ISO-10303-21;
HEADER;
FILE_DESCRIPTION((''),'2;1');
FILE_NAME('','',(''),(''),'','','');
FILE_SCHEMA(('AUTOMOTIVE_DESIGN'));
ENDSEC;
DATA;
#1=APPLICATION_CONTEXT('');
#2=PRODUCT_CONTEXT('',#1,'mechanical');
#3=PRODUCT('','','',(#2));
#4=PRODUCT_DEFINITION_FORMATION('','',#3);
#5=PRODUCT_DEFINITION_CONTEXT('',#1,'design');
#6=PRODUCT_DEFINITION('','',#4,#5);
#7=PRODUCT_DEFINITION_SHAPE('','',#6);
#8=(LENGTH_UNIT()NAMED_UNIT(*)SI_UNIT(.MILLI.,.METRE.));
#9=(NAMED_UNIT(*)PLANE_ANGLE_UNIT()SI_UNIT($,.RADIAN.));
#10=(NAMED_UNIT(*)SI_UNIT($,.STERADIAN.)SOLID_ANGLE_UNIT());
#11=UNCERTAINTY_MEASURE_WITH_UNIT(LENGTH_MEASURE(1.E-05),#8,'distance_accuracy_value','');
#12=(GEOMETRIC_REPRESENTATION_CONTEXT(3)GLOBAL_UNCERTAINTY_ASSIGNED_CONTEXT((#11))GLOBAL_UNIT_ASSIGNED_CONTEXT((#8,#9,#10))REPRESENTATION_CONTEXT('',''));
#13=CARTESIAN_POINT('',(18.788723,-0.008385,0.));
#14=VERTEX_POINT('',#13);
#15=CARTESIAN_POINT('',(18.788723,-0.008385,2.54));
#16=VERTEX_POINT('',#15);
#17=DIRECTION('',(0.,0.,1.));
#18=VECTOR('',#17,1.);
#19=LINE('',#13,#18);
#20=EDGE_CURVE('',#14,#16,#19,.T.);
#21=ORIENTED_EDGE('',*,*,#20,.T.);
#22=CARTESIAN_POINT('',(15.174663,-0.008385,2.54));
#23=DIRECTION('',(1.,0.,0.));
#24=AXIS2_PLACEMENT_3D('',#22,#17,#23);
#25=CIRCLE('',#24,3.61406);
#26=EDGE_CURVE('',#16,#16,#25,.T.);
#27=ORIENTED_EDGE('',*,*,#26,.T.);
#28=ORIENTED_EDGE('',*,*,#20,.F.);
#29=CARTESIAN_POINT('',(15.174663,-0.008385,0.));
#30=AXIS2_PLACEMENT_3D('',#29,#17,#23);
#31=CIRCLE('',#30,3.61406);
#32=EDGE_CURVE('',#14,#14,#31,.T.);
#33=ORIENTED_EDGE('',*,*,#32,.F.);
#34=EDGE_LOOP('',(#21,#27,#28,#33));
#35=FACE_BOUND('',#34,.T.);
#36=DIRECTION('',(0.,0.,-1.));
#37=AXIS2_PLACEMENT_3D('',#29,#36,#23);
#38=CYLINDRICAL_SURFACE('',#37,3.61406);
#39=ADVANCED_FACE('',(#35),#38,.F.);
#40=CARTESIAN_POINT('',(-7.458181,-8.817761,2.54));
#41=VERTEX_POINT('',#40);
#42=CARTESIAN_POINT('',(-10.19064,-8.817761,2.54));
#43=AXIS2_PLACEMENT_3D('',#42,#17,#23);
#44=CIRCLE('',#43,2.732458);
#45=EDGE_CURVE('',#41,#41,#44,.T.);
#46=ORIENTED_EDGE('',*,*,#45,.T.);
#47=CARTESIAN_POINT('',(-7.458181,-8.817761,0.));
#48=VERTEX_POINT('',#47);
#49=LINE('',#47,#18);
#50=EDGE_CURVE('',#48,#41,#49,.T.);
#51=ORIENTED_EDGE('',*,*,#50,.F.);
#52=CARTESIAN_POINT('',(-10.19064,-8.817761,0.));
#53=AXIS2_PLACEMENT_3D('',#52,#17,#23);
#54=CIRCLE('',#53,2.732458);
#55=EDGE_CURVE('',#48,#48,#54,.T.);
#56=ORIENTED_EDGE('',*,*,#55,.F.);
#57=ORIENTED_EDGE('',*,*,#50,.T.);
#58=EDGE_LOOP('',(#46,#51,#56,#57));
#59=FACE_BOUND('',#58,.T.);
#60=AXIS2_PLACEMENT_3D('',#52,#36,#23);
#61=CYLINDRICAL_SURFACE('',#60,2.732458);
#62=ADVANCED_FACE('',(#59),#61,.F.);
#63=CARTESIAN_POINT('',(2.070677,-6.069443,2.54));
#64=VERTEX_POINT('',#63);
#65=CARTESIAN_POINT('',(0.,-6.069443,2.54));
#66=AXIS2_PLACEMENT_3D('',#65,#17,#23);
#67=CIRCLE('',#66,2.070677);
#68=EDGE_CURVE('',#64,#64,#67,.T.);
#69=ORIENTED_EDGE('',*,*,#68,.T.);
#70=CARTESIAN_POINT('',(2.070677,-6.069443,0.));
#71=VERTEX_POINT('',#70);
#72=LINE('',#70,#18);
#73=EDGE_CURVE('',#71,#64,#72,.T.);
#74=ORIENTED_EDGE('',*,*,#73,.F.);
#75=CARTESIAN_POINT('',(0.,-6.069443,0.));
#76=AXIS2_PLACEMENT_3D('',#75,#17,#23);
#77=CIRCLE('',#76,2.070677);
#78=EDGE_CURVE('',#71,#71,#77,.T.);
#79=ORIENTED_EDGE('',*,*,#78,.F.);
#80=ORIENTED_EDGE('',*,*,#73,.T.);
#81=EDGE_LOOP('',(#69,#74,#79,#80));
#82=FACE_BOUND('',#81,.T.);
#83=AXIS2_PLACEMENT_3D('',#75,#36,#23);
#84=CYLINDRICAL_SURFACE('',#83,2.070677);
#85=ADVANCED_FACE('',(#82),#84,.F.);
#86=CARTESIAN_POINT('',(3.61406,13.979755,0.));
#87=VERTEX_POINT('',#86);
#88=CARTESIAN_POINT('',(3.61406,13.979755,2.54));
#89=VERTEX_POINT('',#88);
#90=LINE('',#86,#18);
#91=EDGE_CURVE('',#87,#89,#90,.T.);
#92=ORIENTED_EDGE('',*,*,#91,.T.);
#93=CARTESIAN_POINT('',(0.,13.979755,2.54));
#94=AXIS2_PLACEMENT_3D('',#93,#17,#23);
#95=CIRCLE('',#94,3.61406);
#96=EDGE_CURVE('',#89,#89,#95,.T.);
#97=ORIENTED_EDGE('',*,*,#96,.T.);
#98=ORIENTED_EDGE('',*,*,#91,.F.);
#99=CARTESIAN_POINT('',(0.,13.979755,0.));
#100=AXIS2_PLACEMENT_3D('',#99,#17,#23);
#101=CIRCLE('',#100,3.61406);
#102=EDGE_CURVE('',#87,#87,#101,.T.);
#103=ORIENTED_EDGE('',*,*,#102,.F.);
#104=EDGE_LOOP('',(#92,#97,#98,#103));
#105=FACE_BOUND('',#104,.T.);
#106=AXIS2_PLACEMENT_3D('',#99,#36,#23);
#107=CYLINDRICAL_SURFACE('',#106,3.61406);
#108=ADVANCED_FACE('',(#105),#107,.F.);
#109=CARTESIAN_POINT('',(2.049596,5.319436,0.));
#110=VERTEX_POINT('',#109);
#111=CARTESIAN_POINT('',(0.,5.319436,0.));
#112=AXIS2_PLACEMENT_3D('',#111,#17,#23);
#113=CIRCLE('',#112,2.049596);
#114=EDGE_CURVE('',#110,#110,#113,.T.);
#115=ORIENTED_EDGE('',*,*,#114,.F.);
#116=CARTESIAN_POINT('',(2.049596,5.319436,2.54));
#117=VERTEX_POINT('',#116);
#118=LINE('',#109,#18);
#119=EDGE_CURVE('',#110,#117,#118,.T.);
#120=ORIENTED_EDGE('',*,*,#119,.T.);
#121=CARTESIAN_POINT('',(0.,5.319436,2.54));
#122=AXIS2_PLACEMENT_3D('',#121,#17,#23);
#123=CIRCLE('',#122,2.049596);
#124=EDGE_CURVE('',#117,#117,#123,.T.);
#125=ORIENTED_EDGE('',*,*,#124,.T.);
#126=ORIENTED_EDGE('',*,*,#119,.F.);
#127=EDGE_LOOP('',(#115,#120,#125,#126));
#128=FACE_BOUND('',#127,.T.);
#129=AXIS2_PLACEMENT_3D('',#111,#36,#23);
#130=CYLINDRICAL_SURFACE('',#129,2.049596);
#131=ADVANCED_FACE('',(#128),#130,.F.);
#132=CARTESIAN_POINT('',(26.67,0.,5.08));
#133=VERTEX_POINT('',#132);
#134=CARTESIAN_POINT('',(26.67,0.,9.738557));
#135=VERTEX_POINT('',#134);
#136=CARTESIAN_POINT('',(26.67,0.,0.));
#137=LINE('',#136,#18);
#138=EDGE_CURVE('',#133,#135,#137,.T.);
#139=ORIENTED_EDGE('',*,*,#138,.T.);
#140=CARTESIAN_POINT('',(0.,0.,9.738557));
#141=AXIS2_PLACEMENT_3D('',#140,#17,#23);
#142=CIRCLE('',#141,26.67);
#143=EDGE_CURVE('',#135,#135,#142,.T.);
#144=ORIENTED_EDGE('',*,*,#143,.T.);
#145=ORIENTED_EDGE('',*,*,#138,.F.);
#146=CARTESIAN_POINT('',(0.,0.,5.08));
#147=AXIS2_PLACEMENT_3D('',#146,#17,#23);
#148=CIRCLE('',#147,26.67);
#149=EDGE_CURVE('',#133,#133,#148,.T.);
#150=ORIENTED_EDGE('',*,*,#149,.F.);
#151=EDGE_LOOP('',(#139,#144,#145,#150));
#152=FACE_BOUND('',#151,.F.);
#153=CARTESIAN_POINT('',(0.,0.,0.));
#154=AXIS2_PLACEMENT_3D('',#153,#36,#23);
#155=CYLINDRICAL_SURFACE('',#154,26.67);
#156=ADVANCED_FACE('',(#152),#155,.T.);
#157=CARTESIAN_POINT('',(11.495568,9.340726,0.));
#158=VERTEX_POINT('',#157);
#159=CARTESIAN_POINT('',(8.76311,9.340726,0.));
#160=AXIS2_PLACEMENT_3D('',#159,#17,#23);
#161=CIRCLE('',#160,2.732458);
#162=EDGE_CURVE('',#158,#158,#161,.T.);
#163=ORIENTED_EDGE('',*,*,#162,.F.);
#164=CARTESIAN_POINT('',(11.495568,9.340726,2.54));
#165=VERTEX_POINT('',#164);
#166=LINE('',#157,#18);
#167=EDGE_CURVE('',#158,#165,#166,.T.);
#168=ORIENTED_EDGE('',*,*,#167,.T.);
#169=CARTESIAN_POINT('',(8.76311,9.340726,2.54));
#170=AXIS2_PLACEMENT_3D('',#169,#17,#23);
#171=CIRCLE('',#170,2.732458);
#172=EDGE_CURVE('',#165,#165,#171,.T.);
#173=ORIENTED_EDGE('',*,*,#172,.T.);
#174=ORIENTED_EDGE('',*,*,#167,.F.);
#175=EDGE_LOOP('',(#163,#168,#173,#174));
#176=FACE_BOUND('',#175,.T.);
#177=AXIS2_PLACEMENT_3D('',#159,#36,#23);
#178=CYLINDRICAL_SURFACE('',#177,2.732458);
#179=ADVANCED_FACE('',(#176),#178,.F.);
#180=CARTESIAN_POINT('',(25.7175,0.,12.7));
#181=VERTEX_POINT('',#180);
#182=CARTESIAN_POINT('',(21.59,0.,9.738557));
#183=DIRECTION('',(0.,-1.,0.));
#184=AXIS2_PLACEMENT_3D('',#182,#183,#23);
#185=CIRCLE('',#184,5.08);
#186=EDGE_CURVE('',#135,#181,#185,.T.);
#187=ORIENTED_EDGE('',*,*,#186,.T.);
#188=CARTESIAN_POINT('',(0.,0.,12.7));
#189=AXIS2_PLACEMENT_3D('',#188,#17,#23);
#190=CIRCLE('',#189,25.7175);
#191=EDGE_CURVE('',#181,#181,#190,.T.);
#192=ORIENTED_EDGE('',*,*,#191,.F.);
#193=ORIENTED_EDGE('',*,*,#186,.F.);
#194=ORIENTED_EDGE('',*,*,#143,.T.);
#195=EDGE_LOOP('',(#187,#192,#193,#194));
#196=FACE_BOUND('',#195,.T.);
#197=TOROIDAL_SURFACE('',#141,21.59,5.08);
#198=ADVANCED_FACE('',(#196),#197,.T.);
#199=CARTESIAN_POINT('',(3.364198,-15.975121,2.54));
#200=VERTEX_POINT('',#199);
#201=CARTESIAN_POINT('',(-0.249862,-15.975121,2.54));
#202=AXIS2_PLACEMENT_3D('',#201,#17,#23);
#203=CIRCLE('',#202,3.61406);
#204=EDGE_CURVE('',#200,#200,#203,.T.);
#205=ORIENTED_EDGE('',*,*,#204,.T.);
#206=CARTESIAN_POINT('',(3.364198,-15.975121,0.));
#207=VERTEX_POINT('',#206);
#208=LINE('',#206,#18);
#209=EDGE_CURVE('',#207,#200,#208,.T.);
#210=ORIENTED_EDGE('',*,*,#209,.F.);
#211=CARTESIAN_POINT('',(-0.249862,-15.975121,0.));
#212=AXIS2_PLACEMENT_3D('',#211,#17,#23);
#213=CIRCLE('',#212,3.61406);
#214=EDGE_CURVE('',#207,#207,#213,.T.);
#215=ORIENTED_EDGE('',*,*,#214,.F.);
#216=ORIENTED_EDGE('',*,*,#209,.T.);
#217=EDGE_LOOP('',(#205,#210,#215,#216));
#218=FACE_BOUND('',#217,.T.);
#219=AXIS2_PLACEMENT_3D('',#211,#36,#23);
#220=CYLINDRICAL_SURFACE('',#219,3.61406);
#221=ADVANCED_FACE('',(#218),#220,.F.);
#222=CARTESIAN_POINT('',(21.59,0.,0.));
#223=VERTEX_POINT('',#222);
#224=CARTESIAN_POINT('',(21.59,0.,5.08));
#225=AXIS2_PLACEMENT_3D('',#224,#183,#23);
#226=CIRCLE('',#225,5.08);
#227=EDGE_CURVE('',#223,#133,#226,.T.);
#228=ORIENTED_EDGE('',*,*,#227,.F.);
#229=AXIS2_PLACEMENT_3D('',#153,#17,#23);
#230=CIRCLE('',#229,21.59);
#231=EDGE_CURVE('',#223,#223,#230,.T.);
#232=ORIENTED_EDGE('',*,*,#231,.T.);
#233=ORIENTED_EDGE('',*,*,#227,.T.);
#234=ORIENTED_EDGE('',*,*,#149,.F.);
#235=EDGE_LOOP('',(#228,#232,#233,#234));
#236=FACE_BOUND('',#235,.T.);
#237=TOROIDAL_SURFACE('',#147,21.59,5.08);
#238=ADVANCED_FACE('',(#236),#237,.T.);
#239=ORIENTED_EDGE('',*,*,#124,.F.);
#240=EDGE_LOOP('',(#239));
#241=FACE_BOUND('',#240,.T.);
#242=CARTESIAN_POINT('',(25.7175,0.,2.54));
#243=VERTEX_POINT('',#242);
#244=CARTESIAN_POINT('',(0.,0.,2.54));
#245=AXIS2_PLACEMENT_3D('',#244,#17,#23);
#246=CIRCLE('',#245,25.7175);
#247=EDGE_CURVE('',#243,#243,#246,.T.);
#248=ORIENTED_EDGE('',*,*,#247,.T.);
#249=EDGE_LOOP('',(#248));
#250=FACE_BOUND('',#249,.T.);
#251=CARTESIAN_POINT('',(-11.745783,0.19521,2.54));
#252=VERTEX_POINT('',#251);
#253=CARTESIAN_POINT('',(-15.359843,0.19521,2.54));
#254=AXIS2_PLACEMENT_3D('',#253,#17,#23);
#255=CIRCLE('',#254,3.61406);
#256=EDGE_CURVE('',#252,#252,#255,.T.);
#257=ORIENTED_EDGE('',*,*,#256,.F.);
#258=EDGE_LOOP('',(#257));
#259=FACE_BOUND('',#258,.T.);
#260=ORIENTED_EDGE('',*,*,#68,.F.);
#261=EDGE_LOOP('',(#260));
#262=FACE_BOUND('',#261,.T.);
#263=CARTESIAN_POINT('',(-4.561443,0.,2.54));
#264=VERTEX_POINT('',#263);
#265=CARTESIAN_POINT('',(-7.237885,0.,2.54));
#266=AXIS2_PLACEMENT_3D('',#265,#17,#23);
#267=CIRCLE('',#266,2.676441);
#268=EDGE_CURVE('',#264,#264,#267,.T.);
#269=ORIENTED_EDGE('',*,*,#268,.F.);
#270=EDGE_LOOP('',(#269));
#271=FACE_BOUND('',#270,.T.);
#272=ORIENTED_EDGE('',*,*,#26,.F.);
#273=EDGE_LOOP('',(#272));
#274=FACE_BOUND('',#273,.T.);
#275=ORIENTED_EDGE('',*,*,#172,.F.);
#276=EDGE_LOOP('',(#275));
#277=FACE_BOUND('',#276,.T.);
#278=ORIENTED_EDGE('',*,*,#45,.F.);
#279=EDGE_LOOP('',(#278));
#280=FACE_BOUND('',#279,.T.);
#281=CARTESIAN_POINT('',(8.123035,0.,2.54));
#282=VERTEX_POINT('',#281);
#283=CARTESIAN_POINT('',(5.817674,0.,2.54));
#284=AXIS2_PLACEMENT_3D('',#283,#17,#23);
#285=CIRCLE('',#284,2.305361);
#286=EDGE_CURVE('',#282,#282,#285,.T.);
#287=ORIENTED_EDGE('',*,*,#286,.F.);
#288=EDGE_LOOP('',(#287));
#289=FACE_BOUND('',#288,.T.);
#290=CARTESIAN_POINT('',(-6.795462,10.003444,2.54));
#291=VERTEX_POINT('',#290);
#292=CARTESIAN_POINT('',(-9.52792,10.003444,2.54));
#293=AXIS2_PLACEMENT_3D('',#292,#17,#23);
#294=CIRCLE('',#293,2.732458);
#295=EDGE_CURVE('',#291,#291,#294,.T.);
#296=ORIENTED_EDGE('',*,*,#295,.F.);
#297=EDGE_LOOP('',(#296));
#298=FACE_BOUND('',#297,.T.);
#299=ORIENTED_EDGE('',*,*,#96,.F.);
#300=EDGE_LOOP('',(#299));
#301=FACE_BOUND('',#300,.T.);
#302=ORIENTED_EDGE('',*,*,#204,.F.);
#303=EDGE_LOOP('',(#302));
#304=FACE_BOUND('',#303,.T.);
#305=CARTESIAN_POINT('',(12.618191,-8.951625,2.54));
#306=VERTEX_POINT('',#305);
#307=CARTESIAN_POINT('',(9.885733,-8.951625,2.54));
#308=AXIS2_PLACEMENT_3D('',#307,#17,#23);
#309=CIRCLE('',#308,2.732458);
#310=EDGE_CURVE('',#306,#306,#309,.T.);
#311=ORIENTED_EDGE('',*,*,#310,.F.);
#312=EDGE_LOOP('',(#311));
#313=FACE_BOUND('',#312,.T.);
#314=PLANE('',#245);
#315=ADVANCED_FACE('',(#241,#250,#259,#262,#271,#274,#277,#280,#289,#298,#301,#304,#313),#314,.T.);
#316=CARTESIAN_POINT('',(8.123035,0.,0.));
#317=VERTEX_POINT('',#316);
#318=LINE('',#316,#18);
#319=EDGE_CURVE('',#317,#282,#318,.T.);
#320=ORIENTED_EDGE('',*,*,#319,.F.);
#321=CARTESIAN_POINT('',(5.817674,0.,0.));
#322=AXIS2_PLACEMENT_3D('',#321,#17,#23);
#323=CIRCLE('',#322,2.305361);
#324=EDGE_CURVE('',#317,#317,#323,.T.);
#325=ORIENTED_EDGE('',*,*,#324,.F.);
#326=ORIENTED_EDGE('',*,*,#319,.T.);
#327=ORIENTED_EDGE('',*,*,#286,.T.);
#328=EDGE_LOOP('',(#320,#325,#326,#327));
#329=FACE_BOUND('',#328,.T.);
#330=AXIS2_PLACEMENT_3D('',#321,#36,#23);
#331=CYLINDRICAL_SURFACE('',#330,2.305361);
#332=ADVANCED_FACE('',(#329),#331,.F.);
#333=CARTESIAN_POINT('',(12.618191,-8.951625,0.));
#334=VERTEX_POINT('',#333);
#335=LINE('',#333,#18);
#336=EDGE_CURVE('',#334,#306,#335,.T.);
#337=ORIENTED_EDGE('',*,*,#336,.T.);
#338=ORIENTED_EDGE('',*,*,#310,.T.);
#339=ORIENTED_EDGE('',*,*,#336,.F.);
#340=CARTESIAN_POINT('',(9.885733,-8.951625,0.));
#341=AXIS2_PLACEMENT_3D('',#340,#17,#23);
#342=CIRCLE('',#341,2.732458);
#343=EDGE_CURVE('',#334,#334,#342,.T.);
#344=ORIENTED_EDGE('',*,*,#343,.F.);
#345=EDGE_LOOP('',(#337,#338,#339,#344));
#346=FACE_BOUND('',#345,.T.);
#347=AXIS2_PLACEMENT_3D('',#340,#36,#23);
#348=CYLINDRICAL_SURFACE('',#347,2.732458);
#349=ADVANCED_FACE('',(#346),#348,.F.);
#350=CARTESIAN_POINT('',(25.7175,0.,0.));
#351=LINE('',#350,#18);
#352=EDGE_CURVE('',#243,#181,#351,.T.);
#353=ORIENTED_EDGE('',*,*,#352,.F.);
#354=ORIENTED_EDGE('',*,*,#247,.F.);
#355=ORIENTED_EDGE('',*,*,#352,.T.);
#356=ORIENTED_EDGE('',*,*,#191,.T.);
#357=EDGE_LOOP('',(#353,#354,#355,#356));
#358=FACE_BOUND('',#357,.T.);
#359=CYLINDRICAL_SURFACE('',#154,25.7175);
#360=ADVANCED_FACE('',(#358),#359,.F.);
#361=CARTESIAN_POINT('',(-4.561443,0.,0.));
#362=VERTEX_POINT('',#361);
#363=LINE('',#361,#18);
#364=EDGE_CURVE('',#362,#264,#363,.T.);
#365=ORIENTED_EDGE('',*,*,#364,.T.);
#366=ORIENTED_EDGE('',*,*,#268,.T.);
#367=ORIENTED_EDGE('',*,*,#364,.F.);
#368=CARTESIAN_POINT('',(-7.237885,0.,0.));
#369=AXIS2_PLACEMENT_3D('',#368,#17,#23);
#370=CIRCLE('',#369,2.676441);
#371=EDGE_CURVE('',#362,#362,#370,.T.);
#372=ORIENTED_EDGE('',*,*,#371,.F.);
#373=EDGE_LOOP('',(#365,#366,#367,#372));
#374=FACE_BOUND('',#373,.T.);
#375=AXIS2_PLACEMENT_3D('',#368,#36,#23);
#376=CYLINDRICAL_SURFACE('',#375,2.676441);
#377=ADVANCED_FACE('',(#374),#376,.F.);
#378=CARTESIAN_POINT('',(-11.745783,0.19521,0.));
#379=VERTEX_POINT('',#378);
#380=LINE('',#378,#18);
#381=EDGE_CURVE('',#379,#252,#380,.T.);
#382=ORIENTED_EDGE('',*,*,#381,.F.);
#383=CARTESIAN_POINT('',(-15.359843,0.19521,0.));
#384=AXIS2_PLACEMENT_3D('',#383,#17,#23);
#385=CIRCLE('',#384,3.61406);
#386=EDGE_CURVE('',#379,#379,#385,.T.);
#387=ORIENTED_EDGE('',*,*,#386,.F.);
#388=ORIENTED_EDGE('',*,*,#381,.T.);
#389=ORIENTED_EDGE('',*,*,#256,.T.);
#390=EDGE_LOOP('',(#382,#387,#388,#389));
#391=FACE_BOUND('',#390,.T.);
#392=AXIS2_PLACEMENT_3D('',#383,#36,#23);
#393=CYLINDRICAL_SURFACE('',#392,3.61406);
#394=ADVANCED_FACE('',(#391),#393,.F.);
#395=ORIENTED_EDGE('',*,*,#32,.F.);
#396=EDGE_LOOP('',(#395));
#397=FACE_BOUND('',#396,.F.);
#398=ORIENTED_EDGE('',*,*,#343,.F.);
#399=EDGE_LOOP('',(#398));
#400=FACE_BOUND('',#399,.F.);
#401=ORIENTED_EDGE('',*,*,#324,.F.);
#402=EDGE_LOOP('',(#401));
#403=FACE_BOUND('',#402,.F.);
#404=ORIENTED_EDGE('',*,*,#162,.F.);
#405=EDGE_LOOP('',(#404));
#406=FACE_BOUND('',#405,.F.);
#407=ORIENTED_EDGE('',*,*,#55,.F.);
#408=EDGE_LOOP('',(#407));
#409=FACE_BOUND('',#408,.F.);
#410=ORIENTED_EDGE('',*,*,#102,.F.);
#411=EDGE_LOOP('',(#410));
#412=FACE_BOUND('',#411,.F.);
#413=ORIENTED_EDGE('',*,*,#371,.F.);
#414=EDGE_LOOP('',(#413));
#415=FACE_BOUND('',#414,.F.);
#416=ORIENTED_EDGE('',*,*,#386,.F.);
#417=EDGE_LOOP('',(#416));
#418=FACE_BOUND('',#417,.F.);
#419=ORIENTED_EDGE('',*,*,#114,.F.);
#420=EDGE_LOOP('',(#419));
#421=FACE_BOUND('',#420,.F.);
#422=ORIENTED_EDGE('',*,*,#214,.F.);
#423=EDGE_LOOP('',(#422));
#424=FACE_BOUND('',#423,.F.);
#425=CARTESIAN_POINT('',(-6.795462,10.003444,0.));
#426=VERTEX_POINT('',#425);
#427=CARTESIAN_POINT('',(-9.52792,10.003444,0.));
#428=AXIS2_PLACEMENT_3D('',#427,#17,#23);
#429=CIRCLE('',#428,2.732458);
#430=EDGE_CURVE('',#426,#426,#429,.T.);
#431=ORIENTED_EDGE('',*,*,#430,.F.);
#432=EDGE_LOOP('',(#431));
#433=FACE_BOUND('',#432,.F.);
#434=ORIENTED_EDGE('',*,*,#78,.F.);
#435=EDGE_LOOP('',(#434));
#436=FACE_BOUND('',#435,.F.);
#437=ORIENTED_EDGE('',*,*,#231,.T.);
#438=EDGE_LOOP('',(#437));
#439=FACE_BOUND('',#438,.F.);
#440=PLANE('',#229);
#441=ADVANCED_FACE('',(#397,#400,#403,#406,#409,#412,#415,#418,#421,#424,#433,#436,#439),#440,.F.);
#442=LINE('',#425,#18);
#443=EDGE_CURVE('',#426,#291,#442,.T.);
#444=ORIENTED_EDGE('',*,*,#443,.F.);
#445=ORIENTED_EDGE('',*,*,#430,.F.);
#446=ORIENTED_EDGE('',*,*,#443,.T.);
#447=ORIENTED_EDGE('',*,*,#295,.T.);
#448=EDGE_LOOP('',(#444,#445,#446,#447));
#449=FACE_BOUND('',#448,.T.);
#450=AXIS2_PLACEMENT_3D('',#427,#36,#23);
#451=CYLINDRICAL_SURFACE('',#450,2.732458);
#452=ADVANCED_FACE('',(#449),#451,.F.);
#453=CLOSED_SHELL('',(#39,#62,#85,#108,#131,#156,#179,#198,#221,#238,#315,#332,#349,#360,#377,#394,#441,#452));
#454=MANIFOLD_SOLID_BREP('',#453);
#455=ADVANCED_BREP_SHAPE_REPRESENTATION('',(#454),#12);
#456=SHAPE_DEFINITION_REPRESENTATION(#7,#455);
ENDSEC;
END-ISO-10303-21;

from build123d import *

# Parameters (mm, degrees)
F0_R     = 26.67
F0_R_2   = 25.7175
F1_DEPTH = 12.7
F0_R_3   = 3.6140603124
F0_R_4   = 2.7324582159
F0_R_5   = 2.6764413385
F0_R_6   = 2.0706768846
F0_R_7   = 2.3053611978
F0_R_8   = 2.0495959377
F2_DEPTH = 2.54
F3_R     = 5.08


# Not quite as in the source:
# - a fillet or chamfer that OpenCascade refuses, or shapes differently, is made with other operations: its cross-section is extruded or revolved along the edge and cut away or added


with BuildPart() as f1:
    # F0 (on Top) → F1 (new body)
    with BuildSketch(Plane.XY):
        Circle(F0_R)
        Circle(F0_R_2, mode=Mode.SUBTRACT)
    extrude(amount=F1_DEPTH)

    # F0 (on Top) → F2 (join)
    with BuildSketch(Plane.XY):
        Circle(F0_R_2)
        with Locations((-0.2498619724, -15.9751214087)):
            Circle(F0_R_3, mode=Mode.SUBTRACT)
        with Locations((-10.1906396449, -8.8177612051)):
            Circle(F0_R_4, mode=Mode.SUBTRACT)
        with Locations((-7.2378846817, 0)):
            Circle(F0_R_5, mode=Mode.SUBTRACT)
        with Locations((0, -6.0694427229)):
            Circle(F0_R_6, mode=Mode.SUBTRACT)
        with Locations((9.885732587, -8.9516246493)):
            Circle(F0_R_4, mode=Mode.SUBTRACT)
        with Locations((5.8176736347, 0)):
            Circle(F0_R_7, mode=Mode.SUBTRACT)
        with Locations((15.1746629134, -0.0083851115)):
            Circle(F0_R_3, mode=Mode.SUBTRACT)
        with Locations((-15.3598431498, 0.1952101447)):
            Circle(F0_R_3, mode=Mode.SUBTRACT)
        with Locations((0, 5.3194356151)):
            Circle(F0_R_8, mode=Mode.SUBTRACT)
        with Locations((-9.527919814, 10.0034438074)):
            Circle(F0_R_4, mode=Mode.SUBTRACT)
        with Locations((0, 13.979755342)):
            Circle(F0_R_3, mode=Mode.SUBTRACT)
        with Locations((8.7631102651, 9.3407258391)):
            Circle(F0_R_4, mode=Mode.SUBTRACT)
    extrude(amount=F2_DEPTH)

    # F3
    f3_edges = [f1.edges().sort_by_distance(p)[0] for p in [
        (-26.67, 0, 0),
    ]]
    fillet(f3_edges, radius=F3_R)

    # F4: fillet of radius 5.08 on 1 edges, made by hand

    # F4_s1 → F4_t2 (revolve, cut)
    with BuildSketch(Plane.XZ):
        with BuildLine():
            ThreePointArc((26.67, 9.7385571506), (26.4260159222, 11.2939831373), (25.7175, 12.7))
            Line((25.7175, 12.7), (26.67, 12.7))
            Line((26.67, 12.7), (26.67, 9.7385571506))
        make_face()
    revolve(axis=Axis((0, 0, 12.7), (0, 0, 1)), mode=Mode.SUBTRACT)


solid = f1.part
